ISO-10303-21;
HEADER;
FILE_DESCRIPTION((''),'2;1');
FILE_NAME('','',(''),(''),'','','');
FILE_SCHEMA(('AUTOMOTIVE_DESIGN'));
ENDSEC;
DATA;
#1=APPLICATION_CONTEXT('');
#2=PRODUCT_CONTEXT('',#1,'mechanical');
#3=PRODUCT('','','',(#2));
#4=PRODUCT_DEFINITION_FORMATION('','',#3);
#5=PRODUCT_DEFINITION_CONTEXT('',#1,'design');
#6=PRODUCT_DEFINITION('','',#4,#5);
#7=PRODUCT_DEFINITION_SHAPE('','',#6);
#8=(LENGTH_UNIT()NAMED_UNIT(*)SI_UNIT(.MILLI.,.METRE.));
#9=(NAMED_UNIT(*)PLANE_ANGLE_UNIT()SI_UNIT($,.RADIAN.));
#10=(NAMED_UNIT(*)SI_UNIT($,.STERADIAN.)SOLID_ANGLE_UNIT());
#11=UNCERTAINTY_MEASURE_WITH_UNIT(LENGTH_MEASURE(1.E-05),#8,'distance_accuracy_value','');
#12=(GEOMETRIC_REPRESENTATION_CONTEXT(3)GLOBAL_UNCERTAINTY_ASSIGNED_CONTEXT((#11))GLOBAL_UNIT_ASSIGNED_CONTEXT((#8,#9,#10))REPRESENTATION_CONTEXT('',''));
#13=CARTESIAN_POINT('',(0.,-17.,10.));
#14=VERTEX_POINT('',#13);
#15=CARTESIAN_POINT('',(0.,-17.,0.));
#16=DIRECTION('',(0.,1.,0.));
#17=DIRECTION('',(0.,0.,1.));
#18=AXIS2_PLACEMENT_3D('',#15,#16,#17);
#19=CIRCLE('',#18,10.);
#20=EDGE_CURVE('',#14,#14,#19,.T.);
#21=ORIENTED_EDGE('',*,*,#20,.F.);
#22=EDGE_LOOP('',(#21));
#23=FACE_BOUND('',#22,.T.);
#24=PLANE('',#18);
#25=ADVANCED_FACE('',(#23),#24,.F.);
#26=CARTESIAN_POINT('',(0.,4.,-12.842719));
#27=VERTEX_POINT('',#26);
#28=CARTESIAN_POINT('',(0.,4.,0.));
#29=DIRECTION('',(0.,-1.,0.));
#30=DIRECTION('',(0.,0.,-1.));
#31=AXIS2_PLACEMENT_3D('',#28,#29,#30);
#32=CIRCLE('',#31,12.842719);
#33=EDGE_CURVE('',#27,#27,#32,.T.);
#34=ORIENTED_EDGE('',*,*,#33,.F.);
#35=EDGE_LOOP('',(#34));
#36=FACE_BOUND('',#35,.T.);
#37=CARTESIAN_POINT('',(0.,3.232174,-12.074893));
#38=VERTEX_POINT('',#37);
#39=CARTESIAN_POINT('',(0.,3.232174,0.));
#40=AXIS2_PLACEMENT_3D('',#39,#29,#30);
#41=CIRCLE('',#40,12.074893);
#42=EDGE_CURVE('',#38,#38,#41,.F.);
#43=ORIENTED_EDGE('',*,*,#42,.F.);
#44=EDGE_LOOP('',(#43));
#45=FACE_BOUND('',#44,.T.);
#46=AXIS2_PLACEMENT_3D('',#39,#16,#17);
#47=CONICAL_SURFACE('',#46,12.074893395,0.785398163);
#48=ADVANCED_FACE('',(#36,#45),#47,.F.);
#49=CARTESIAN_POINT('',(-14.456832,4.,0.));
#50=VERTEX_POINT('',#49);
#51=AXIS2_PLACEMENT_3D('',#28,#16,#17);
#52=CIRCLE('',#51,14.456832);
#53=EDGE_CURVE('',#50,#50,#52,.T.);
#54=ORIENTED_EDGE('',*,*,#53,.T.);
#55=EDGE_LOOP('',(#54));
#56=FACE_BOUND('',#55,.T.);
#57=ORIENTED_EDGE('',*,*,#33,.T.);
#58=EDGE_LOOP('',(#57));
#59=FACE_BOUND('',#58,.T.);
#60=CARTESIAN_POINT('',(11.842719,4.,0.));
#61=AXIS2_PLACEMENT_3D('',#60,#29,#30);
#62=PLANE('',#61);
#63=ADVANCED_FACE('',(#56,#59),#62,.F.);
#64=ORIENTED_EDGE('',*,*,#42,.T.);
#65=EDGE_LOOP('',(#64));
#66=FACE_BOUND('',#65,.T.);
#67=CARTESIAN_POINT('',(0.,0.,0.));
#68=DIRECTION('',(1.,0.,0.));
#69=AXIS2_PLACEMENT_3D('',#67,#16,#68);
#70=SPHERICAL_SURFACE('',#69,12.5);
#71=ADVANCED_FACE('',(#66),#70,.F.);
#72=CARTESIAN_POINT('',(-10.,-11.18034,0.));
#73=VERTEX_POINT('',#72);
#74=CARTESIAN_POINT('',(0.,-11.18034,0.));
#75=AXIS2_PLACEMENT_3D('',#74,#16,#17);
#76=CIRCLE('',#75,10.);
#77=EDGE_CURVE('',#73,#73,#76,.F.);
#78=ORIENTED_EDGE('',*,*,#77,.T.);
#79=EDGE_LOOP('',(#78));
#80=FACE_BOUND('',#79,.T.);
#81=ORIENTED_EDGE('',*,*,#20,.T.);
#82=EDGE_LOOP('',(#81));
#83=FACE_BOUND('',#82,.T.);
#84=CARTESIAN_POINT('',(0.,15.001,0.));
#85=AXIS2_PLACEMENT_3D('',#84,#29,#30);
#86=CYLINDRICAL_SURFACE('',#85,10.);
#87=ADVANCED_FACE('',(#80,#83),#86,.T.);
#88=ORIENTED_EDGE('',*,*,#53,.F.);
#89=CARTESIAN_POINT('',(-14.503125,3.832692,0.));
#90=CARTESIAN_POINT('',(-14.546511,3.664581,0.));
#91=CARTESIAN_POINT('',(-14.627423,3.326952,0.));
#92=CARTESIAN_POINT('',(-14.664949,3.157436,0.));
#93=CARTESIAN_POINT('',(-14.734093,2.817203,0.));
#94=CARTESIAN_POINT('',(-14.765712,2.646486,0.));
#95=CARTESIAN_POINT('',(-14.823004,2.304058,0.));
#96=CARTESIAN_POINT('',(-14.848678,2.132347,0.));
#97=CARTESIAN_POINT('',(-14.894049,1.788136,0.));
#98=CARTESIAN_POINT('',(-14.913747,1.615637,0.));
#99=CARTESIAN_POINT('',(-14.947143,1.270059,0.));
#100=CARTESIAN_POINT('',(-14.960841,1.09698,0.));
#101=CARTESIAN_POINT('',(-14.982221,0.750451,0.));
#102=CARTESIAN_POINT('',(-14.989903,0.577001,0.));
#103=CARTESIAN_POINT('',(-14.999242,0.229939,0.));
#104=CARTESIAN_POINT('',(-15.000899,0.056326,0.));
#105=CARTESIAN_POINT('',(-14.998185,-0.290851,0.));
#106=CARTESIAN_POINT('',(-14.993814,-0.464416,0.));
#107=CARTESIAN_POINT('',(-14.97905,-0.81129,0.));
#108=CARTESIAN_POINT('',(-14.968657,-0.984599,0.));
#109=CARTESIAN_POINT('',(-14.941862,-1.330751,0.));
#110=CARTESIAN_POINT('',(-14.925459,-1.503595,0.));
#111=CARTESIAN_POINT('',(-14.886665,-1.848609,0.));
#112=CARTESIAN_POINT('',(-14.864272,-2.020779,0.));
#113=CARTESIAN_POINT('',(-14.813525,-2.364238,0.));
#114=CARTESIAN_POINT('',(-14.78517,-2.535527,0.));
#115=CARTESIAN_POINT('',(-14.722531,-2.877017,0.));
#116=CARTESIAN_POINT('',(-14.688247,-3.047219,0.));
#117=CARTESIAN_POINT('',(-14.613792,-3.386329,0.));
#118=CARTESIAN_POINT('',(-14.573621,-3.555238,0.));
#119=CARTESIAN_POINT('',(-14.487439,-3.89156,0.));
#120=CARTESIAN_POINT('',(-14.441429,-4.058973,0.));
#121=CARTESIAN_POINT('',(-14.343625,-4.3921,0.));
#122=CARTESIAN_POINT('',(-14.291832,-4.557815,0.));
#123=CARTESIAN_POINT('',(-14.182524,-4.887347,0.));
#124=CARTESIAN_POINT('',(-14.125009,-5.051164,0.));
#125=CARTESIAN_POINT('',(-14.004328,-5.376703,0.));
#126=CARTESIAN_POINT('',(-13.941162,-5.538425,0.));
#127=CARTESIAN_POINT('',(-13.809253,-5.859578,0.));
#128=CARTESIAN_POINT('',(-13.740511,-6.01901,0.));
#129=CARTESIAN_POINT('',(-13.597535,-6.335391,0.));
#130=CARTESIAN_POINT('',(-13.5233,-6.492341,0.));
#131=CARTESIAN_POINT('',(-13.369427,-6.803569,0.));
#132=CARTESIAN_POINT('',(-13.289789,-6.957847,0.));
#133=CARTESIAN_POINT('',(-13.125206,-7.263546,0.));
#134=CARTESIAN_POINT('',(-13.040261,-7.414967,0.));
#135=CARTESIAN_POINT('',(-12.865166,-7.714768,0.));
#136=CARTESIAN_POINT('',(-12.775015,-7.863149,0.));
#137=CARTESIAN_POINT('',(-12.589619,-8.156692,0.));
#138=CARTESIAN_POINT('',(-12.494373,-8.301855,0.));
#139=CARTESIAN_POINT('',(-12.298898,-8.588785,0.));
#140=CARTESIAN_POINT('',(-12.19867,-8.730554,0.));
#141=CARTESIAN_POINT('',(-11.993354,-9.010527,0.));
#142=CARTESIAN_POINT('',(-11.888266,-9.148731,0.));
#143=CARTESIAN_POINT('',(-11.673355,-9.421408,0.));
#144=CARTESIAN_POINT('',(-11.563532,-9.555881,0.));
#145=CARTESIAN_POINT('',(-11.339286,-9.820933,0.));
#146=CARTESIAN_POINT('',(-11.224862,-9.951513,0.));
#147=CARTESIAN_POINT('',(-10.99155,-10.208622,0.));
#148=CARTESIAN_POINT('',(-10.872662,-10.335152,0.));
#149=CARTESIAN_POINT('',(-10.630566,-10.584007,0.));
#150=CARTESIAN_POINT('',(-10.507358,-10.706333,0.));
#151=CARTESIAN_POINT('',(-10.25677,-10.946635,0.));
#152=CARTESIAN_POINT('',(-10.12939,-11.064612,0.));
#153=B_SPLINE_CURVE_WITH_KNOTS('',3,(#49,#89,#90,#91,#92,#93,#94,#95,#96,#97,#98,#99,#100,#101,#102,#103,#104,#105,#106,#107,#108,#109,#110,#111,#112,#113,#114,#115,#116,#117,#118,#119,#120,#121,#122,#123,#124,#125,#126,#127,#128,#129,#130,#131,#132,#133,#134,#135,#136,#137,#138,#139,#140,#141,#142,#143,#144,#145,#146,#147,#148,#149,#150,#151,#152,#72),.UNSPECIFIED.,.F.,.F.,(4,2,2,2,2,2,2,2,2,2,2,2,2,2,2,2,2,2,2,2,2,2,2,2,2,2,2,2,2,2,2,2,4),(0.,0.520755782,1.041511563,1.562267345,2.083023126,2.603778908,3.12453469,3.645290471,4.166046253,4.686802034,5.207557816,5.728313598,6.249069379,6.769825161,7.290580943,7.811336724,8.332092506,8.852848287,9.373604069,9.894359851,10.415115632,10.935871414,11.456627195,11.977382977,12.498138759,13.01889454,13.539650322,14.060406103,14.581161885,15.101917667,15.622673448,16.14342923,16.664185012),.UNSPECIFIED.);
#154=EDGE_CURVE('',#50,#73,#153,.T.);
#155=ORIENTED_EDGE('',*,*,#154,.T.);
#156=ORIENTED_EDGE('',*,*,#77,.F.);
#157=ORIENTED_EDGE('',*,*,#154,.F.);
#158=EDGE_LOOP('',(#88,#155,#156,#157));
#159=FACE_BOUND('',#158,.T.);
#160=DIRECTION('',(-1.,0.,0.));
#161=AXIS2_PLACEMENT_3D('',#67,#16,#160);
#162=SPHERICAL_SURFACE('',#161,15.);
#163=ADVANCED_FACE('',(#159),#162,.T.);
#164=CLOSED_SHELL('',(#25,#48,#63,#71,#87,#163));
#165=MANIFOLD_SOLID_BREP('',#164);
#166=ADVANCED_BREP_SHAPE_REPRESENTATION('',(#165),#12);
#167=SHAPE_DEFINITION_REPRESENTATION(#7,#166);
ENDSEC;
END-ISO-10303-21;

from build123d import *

# Parameters (mm, degrees)
BOSS_EXTRUDE1_REACH      = 44.981
BOSS_EXTRUDE1_END_RADIUS = 15
BOSS_EXTRUDE1_START      = -17
SKETCH2_R                = 10
CHAMFER1_SIZE            = 1


with BuildPart() as part:
    # Sketch1 → Revolve1 (revolve)
    with BuildSketch(Plane.XY):
        with BuildLine():
            Line((11.842719282, 4), (14.456832295, 4))
            ThreePointArc((14.456832295, 4), (11.937336386, -9.082951062), (0, -15))
            Line((0, -15), (0, -12.5))
            ThreePointArc((0, -12.5), (10.155048006, -7.288689869), (11.842719282, 4))
        make_face()
    revolve(axis=Axis((0, 23.994682016, 0), (0, -1, 0)))

    # Boss-Extrude1: up to this sphere (the profile starts outside it)
    boss_extrude1_end = Location((0, 0, 0)) * Sphere(BOSS_EXTRUDE1_END_RADIUS, mode=Mode.PRIVATE)
    # Sketch2 → Boss-Extrude1 (add, up to the surface)
    with BuildSketch(Plane(origin=(0, 0, 0), x_dir=(1, 0, 0), z_dir=(0, 1, 0)).offset(BOSS_EXTRUDE1_START), mode=Mode.PRIVATE) as boss_extrude1_sk1:
        with Locations(Location((0, 0, 0), (0, 0, 180))):
            Circle(SKETCH2_R)
    boss_extrude1_tool1 = extrude(boss_extrude1_sk1.sketch, amount=BOSS_EXTRUDE1_REACH, mode=Mode.PRIVATE) - boss_extrude1_end
    add(boss_extrude1_tool1.solids().sort_by_distance((0, -17, 0))[0])

    # Chamfer1
    # the kernel refuses this chamfer: 1, 0.789005964 mm, written as the material it takes off along each edge
    with BuildSketch(Plane(origin=(0, 4, 0), x_dir=(1, 0, 0), z_dir=(0, 0, -1))) as chamfer1_piece_1:
        with BuildLine():
            Line((11.842719282 + CHAMFER1_SIZE, 0), (12.074893395, 0.767825887))
            ThreePointArc((12.074893395, 0.767825887), (11.967702274, 0.391107888), (11.842719282, 0))
            Line((11.842719282, 0), (11.842719282 + CHAMFER1_SIZE, 0))
        make_face()
    revolve(axis=Axis((0, 4, 0), (0, -1, 0)), mode=Mode.SUBTRACT)


solid = part.part
